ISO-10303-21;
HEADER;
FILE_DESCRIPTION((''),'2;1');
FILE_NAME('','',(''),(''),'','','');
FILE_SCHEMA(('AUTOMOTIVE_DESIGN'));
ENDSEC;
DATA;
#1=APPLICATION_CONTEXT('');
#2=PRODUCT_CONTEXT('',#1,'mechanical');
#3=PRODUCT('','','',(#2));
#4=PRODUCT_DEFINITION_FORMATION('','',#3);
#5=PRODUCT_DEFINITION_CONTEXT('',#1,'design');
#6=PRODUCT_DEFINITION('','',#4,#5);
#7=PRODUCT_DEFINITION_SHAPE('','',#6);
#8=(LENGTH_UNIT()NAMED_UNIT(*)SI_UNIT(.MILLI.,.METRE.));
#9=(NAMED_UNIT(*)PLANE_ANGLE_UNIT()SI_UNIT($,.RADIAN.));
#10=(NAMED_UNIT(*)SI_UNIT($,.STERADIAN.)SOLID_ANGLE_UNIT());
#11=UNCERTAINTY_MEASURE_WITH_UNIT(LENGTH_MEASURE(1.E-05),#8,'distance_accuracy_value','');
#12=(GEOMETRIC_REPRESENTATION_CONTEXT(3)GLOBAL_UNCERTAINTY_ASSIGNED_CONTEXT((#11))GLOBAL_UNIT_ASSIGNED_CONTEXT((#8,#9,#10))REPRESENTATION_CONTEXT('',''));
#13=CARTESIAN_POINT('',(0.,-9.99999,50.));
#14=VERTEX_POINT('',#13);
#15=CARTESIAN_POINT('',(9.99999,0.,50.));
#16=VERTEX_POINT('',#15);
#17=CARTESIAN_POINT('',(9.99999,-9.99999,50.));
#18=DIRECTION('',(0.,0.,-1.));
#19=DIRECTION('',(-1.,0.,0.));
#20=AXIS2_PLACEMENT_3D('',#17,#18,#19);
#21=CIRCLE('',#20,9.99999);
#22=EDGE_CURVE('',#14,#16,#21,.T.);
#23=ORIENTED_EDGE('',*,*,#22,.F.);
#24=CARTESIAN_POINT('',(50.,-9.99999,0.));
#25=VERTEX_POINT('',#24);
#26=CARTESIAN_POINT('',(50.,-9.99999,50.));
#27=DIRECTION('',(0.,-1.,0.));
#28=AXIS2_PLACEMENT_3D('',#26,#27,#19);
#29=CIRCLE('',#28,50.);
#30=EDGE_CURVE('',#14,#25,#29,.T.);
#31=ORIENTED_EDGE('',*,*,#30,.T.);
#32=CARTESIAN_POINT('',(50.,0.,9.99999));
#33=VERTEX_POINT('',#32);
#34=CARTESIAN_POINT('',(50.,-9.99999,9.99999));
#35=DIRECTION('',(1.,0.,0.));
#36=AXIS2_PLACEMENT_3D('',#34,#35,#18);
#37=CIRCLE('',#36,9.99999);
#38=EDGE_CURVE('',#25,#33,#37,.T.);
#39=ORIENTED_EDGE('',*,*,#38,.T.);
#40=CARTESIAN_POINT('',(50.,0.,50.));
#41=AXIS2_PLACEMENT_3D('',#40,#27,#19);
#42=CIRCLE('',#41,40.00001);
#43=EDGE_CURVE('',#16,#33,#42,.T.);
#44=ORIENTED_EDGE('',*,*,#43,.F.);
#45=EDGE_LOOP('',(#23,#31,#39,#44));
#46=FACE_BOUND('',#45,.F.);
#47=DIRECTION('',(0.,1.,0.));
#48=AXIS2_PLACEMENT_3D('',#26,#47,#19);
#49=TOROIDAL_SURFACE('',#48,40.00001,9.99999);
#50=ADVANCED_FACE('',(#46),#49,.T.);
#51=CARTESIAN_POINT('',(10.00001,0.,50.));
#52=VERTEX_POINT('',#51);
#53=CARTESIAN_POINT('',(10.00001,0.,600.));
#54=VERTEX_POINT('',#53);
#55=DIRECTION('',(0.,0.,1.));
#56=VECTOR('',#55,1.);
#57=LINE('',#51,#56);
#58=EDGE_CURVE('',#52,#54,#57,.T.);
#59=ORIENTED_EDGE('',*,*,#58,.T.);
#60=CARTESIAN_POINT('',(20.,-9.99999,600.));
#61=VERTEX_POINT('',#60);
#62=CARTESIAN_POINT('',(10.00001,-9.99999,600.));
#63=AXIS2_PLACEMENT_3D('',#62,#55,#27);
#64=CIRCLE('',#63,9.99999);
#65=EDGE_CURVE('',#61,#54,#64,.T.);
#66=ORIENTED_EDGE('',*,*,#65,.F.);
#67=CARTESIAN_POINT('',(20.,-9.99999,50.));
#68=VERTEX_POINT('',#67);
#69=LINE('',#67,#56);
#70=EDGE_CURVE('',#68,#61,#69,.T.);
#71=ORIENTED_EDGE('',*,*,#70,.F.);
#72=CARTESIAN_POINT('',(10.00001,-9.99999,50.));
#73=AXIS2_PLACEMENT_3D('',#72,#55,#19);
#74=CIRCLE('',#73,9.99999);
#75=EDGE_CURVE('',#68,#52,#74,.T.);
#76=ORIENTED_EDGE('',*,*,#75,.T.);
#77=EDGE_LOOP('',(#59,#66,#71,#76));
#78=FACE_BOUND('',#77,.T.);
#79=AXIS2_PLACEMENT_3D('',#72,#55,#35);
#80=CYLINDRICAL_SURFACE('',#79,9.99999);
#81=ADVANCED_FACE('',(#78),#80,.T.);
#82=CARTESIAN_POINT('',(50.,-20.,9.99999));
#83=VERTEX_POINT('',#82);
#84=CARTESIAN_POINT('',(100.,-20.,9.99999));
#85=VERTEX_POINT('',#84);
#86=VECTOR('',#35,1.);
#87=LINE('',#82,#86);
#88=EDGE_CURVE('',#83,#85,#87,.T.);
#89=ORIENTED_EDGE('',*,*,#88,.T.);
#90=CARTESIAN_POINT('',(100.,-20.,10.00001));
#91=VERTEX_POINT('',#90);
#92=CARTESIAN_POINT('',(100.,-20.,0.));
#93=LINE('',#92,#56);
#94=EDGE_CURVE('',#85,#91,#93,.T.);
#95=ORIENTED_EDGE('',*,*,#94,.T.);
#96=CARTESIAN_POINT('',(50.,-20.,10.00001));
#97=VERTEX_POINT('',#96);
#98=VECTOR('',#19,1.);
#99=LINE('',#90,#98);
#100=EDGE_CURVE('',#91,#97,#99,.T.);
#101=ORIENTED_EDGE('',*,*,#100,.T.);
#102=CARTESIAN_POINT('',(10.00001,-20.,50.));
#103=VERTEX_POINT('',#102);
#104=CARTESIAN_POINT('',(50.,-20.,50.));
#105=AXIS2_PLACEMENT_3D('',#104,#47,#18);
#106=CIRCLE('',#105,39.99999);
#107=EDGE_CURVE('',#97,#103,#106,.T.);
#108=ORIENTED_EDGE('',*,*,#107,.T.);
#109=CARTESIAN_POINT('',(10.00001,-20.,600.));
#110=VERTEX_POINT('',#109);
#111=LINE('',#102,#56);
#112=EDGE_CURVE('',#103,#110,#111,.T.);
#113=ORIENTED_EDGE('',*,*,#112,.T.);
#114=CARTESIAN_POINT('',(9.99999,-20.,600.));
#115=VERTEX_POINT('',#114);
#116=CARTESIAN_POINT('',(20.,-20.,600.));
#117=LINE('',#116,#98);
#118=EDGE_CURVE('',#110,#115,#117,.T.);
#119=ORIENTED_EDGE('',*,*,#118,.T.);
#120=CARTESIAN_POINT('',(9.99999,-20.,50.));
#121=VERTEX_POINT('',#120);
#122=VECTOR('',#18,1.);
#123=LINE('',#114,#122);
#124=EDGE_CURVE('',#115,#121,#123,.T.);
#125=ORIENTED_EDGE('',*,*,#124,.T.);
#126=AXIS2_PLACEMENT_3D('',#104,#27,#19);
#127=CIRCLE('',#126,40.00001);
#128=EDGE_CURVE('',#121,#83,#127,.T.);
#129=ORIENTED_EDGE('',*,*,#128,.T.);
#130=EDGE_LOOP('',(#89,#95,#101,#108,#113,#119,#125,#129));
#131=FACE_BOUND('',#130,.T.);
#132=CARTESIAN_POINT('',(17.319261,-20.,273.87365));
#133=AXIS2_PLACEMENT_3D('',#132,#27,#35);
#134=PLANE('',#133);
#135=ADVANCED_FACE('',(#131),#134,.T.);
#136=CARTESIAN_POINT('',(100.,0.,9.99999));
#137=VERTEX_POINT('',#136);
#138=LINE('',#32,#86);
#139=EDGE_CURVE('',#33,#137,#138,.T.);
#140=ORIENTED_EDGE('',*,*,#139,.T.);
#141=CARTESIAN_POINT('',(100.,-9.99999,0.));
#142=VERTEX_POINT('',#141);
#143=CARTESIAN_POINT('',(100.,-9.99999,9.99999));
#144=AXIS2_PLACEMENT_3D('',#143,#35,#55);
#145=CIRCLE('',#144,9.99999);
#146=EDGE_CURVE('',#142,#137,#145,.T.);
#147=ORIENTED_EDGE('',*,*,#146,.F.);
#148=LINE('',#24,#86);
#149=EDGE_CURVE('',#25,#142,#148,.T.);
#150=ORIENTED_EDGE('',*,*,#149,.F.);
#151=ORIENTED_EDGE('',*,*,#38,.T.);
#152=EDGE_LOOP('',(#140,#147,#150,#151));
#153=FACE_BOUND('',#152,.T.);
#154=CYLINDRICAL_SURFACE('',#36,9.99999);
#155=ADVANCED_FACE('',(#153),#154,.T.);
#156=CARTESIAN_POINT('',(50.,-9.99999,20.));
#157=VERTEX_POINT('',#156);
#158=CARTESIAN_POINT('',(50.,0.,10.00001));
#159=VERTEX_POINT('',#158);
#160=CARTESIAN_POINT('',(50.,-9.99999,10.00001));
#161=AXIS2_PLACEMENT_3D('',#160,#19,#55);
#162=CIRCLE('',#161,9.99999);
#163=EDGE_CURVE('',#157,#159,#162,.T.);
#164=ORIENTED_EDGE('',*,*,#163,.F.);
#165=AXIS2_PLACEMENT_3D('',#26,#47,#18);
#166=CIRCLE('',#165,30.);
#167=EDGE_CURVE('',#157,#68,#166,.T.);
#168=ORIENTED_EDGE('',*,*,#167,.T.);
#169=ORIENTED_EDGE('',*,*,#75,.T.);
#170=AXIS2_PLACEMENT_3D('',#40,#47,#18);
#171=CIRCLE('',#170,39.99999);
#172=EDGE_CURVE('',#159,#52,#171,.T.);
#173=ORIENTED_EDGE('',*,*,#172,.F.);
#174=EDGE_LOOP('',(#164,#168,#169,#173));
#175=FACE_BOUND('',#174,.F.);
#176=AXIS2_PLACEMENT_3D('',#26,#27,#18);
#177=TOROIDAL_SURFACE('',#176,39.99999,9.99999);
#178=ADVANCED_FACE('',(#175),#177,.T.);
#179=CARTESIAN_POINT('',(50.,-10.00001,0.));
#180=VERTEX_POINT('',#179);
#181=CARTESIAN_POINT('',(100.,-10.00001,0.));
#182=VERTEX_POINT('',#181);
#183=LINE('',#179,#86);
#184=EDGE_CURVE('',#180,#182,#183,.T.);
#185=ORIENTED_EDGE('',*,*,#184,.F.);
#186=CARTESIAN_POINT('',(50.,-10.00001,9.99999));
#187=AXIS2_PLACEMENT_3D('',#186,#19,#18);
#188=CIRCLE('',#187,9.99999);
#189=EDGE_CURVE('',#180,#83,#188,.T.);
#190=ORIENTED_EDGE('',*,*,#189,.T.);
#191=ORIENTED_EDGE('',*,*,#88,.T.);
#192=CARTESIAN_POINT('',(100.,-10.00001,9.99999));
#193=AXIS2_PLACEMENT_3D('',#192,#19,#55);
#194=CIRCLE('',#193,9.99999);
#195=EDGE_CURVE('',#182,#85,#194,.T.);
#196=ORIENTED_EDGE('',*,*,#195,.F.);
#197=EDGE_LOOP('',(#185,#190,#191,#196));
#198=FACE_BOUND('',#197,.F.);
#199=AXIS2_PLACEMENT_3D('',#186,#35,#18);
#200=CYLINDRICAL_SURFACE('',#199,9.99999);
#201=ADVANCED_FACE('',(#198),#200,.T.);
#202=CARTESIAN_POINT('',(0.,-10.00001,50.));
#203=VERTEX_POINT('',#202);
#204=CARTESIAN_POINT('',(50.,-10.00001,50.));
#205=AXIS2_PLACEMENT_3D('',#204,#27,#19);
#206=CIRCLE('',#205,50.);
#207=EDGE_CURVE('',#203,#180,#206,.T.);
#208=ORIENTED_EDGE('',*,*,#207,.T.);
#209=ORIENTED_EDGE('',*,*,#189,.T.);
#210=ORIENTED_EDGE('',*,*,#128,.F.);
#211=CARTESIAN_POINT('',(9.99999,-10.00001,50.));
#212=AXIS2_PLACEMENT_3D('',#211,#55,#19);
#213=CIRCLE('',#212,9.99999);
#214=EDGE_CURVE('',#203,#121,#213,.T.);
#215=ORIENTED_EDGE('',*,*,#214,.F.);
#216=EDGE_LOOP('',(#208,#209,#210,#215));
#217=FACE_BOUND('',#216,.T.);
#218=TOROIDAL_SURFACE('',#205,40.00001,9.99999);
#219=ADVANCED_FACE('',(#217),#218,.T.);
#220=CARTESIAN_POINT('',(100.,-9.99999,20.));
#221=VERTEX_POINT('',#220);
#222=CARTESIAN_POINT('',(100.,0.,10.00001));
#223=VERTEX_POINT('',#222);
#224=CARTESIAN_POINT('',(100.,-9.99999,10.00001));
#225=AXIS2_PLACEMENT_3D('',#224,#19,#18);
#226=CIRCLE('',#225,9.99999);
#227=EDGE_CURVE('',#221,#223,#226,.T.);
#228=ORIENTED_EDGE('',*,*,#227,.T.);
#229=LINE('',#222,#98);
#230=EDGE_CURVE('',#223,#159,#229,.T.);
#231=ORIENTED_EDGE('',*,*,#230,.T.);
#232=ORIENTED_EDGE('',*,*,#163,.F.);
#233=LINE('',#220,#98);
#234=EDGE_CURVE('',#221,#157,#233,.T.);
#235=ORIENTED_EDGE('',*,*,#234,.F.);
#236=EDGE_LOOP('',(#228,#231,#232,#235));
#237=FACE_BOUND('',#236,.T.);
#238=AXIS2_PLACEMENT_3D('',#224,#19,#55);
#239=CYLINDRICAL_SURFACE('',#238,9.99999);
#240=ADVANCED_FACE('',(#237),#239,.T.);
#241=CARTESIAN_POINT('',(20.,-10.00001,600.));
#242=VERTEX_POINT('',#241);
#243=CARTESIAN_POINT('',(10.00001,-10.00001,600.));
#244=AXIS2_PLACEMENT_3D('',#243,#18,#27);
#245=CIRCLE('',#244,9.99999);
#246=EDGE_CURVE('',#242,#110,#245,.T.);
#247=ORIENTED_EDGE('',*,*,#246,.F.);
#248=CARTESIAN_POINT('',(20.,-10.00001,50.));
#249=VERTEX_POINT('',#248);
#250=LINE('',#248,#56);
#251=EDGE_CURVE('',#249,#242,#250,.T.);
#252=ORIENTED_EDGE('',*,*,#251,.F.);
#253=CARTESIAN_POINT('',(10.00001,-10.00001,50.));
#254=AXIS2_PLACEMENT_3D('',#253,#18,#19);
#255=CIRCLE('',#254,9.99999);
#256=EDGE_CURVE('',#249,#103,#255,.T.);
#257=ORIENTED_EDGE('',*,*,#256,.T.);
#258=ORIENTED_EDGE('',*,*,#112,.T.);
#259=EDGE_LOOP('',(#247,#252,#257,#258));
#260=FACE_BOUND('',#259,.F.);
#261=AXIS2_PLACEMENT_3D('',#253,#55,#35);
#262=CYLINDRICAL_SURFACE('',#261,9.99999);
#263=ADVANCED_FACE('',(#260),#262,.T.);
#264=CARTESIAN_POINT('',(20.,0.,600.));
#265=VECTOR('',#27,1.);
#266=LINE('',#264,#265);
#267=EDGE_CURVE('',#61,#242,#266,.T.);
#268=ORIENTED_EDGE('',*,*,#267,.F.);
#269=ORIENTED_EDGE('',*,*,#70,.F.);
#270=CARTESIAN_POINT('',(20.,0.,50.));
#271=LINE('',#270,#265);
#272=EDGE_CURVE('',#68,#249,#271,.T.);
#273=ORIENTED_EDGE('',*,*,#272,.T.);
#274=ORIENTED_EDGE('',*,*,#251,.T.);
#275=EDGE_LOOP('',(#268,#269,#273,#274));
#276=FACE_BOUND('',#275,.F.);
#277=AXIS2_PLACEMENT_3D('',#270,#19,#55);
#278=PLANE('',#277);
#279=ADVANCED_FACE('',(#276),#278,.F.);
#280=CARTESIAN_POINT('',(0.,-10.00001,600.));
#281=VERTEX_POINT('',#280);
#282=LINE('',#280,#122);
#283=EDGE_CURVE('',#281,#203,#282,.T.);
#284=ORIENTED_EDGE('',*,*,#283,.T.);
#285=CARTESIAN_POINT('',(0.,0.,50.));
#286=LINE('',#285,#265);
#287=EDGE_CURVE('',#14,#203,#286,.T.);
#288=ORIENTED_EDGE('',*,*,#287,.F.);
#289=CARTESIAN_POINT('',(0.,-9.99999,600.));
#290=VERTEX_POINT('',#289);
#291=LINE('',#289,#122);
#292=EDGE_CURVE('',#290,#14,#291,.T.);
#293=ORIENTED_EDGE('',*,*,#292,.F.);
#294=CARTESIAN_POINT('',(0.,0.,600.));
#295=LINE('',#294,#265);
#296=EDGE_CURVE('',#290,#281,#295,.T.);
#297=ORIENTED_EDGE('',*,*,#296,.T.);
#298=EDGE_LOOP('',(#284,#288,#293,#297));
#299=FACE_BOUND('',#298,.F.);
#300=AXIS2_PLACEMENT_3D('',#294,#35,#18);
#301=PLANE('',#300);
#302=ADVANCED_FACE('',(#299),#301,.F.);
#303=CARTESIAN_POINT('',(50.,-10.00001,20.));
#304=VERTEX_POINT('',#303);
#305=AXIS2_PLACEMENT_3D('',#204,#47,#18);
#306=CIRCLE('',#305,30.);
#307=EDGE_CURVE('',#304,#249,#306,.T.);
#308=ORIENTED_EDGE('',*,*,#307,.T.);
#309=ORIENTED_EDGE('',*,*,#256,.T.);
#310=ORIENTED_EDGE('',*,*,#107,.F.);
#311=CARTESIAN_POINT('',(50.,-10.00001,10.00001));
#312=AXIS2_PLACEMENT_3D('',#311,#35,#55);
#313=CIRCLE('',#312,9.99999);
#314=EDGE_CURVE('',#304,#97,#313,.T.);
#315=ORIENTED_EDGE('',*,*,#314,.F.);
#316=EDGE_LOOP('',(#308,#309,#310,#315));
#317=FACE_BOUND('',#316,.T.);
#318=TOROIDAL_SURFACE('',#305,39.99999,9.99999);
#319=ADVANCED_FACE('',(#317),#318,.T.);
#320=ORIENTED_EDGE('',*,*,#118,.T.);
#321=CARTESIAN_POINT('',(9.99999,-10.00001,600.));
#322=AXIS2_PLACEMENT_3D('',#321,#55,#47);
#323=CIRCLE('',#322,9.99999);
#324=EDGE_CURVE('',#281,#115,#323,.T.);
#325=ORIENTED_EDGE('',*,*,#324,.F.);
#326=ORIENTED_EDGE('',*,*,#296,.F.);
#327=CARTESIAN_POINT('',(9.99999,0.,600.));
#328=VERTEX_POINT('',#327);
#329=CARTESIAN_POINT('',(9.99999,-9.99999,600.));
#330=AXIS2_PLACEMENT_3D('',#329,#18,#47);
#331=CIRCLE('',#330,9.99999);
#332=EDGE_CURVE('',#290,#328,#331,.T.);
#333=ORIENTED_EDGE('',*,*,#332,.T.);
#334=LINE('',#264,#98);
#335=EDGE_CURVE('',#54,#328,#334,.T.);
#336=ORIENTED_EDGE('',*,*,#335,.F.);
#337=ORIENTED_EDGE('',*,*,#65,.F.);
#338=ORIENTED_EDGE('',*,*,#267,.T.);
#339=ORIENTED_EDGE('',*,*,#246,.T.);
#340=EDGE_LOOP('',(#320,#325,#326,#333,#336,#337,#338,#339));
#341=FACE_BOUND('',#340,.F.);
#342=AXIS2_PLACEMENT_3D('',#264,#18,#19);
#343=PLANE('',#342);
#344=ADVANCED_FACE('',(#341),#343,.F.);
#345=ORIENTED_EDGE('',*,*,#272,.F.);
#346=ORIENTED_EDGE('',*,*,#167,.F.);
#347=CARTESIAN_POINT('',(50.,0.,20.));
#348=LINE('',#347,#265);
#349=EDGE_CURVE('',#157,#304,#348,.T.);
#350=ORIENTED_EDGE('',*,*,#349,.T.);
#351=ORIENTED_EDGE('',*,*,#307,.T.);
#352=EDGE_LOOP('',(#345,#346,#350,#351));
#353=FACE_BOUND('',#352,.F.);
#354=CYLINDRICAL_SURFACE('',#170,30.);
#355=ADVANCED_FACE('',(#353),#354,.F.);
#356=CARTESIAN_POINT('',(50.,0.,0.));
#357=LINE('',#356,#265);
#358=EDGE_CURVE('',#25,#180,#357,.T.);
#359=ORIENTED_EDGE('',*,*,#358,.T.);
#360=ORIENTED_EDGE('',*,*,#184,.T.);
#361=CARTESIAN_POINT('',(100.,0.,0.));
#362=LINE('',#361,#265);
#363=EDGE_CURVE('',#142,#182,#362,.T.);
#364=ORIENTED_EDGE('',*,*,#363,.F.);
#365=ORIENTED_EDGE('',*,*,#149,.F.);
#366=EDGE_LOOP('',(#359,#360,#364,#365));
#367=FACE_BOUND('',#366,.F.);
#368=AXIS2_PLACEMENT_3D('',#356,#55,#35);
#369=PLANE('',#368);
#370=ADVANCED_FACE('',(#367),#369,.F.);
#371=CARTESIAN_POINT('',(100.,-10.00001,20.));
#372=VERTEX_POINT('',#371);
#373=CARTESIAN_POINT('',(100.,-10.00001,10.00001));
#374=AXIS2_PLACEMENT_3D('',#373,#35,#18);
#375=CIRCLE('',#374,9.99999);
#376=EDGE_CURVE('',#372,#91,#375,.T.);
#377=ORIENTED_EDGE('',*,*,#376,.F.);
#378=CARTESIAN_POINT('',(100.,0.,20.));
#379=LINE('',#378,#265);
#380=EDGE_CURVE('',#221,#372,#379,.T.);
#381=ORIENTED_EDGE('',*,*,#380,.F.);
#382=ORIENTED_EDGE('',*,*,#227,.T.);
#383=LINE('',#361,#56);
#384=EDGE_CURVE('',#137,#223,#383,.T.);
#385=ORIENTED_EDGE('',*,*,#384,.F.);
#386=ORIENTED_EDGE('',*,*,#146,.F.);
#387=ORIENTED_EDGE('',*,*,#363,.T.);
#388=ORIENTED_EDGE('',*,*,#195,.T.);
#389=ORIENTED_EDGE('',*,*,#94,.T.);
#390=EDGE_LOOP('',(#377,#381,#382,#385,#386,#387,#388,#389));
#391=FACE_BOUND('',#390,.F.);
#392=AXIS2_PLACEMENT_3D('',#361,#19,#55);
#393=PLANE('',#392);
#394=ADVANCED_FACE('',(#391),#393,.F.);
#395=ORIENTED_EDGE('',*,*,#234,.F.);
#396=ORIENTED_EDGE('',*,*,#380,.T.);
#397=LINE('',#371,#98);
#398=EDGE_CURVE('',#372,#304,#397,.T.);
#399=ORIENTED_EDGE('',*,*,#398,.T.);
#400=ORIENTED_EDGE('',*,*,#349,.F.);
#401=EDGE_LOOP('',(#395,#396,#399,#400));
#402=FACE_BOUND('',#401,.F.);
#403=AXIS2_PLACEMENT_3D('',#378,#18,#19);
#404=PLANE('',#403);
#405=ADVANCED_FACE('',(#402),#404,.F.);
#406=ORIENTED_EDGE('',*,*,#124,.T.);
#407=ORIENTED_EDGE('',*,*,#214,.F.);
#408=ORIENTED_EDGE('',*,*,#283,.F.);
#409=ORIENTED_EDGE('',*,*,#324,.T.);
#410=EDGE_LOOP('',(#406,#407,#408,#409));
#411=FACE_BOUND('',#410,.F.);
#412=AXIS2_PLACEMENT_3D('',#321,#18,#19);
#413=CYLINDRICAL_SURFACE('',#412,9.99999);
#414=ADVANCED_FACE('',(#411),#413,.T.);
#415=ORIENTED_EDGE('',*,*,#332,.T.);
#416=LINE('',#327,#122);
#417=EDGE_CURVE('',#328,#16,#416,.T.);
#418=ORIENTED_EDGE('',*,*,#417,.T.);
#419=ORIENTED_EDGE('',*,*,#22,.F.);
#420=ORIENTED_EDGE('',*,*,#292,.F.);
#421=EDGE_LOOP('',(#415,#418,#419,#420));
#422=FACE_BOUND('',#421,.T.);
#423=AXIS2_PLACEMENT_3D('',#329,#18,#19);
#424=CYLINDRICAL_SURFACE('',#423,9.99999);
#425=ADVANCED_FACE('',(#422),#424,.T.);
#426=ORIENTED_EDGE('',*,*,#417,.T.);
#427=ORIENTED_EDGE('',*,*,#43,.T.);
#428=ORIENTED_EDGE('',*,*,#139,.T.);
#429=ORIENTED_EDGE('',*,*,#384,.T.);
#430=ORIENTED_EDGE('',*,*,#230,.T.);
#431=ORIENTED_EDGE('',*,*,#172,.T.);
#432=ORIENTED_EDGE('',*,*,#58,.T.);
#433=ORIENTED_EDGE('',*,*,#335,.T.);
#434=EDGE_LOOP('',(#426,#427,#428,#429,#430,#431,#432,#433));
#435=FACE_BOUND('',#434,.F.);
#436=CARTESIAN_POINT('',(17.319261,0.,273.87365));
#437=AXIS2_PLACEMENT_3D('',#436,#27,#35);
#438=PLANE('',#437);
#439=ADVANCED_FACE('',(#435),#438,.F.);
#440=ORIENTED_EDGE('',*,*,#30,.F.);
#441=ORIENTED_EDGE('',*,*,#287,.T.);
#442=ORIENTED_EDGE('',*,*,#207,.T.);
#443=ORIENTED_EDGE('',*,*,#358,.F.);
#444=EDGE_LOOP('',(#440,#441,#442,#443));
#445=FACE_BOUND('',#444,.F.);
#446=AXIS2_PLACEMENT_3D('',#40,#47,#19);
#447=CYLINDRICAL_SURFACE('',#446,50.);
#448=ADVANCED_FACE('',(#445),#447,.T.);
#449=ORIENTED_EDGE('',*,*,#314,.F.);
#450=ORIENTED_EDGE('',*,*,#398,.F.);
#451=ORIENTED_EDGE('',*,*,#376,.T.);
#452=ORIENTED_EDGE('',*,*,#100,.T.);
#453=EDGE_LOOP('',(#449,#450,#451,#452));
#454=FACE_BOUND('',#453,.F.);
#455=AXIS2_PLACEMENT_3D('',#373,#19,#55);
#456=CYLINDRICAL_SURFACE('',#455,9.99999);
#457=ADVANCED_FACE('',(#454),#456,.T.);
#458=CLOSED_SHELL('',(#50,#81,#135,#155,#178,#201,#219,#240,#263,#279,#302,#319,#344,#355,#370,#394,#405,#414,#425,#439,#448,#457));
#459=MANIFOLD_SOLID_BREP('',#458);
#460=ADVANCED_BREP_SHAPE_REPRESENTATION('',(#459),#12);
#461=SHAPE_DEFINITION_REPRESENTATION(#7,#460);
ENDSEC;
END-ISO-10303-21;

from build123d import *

# Parameters (mm, degrees)
F1_DEPTH = 20
F2_R     = 9.99999


# Not quite as in the source:
# - a fillet or chamfer is up to 0.001 mm smaller than in the source, because OpenCascade refuses the exact size


with BuildPart() as f1:
    # F0 (on Front) → F1 (new body)
    with BuildSketch(Plane.XZ):
        with BuildLine():
            Line((0, 600), (0, 50))
            ThreePointArc((0, 50), (14.6446609407, 14.6446609407), (50, 0))
            Line((50, 0), (100, 0))
            Line((100, 0), (100, 20))
            Line((100, 20), (50, 20))
            ThreePointArc((50, 20), (28.7867965644, 28.7867965644), (20, 50))
            Line((20, 50), (20, 600))
            Line((20, 600), (0, 600))
        make_face()
    extrude(amount=F1_DEPTH)

    # F2 (radius 10 in the source; OpenCascade refuses exactly that, so slightly less here)
    f2_edges = [f1.edges().sort_by_distance(p)[0] for p in [
        (0, -20, 325),
        (20, -20, 325),
        (20, 0, 325),
        (0, 0, 325),
    ]]
    fillet(f2_edges, radius=F2_R)


solid = f1.part
